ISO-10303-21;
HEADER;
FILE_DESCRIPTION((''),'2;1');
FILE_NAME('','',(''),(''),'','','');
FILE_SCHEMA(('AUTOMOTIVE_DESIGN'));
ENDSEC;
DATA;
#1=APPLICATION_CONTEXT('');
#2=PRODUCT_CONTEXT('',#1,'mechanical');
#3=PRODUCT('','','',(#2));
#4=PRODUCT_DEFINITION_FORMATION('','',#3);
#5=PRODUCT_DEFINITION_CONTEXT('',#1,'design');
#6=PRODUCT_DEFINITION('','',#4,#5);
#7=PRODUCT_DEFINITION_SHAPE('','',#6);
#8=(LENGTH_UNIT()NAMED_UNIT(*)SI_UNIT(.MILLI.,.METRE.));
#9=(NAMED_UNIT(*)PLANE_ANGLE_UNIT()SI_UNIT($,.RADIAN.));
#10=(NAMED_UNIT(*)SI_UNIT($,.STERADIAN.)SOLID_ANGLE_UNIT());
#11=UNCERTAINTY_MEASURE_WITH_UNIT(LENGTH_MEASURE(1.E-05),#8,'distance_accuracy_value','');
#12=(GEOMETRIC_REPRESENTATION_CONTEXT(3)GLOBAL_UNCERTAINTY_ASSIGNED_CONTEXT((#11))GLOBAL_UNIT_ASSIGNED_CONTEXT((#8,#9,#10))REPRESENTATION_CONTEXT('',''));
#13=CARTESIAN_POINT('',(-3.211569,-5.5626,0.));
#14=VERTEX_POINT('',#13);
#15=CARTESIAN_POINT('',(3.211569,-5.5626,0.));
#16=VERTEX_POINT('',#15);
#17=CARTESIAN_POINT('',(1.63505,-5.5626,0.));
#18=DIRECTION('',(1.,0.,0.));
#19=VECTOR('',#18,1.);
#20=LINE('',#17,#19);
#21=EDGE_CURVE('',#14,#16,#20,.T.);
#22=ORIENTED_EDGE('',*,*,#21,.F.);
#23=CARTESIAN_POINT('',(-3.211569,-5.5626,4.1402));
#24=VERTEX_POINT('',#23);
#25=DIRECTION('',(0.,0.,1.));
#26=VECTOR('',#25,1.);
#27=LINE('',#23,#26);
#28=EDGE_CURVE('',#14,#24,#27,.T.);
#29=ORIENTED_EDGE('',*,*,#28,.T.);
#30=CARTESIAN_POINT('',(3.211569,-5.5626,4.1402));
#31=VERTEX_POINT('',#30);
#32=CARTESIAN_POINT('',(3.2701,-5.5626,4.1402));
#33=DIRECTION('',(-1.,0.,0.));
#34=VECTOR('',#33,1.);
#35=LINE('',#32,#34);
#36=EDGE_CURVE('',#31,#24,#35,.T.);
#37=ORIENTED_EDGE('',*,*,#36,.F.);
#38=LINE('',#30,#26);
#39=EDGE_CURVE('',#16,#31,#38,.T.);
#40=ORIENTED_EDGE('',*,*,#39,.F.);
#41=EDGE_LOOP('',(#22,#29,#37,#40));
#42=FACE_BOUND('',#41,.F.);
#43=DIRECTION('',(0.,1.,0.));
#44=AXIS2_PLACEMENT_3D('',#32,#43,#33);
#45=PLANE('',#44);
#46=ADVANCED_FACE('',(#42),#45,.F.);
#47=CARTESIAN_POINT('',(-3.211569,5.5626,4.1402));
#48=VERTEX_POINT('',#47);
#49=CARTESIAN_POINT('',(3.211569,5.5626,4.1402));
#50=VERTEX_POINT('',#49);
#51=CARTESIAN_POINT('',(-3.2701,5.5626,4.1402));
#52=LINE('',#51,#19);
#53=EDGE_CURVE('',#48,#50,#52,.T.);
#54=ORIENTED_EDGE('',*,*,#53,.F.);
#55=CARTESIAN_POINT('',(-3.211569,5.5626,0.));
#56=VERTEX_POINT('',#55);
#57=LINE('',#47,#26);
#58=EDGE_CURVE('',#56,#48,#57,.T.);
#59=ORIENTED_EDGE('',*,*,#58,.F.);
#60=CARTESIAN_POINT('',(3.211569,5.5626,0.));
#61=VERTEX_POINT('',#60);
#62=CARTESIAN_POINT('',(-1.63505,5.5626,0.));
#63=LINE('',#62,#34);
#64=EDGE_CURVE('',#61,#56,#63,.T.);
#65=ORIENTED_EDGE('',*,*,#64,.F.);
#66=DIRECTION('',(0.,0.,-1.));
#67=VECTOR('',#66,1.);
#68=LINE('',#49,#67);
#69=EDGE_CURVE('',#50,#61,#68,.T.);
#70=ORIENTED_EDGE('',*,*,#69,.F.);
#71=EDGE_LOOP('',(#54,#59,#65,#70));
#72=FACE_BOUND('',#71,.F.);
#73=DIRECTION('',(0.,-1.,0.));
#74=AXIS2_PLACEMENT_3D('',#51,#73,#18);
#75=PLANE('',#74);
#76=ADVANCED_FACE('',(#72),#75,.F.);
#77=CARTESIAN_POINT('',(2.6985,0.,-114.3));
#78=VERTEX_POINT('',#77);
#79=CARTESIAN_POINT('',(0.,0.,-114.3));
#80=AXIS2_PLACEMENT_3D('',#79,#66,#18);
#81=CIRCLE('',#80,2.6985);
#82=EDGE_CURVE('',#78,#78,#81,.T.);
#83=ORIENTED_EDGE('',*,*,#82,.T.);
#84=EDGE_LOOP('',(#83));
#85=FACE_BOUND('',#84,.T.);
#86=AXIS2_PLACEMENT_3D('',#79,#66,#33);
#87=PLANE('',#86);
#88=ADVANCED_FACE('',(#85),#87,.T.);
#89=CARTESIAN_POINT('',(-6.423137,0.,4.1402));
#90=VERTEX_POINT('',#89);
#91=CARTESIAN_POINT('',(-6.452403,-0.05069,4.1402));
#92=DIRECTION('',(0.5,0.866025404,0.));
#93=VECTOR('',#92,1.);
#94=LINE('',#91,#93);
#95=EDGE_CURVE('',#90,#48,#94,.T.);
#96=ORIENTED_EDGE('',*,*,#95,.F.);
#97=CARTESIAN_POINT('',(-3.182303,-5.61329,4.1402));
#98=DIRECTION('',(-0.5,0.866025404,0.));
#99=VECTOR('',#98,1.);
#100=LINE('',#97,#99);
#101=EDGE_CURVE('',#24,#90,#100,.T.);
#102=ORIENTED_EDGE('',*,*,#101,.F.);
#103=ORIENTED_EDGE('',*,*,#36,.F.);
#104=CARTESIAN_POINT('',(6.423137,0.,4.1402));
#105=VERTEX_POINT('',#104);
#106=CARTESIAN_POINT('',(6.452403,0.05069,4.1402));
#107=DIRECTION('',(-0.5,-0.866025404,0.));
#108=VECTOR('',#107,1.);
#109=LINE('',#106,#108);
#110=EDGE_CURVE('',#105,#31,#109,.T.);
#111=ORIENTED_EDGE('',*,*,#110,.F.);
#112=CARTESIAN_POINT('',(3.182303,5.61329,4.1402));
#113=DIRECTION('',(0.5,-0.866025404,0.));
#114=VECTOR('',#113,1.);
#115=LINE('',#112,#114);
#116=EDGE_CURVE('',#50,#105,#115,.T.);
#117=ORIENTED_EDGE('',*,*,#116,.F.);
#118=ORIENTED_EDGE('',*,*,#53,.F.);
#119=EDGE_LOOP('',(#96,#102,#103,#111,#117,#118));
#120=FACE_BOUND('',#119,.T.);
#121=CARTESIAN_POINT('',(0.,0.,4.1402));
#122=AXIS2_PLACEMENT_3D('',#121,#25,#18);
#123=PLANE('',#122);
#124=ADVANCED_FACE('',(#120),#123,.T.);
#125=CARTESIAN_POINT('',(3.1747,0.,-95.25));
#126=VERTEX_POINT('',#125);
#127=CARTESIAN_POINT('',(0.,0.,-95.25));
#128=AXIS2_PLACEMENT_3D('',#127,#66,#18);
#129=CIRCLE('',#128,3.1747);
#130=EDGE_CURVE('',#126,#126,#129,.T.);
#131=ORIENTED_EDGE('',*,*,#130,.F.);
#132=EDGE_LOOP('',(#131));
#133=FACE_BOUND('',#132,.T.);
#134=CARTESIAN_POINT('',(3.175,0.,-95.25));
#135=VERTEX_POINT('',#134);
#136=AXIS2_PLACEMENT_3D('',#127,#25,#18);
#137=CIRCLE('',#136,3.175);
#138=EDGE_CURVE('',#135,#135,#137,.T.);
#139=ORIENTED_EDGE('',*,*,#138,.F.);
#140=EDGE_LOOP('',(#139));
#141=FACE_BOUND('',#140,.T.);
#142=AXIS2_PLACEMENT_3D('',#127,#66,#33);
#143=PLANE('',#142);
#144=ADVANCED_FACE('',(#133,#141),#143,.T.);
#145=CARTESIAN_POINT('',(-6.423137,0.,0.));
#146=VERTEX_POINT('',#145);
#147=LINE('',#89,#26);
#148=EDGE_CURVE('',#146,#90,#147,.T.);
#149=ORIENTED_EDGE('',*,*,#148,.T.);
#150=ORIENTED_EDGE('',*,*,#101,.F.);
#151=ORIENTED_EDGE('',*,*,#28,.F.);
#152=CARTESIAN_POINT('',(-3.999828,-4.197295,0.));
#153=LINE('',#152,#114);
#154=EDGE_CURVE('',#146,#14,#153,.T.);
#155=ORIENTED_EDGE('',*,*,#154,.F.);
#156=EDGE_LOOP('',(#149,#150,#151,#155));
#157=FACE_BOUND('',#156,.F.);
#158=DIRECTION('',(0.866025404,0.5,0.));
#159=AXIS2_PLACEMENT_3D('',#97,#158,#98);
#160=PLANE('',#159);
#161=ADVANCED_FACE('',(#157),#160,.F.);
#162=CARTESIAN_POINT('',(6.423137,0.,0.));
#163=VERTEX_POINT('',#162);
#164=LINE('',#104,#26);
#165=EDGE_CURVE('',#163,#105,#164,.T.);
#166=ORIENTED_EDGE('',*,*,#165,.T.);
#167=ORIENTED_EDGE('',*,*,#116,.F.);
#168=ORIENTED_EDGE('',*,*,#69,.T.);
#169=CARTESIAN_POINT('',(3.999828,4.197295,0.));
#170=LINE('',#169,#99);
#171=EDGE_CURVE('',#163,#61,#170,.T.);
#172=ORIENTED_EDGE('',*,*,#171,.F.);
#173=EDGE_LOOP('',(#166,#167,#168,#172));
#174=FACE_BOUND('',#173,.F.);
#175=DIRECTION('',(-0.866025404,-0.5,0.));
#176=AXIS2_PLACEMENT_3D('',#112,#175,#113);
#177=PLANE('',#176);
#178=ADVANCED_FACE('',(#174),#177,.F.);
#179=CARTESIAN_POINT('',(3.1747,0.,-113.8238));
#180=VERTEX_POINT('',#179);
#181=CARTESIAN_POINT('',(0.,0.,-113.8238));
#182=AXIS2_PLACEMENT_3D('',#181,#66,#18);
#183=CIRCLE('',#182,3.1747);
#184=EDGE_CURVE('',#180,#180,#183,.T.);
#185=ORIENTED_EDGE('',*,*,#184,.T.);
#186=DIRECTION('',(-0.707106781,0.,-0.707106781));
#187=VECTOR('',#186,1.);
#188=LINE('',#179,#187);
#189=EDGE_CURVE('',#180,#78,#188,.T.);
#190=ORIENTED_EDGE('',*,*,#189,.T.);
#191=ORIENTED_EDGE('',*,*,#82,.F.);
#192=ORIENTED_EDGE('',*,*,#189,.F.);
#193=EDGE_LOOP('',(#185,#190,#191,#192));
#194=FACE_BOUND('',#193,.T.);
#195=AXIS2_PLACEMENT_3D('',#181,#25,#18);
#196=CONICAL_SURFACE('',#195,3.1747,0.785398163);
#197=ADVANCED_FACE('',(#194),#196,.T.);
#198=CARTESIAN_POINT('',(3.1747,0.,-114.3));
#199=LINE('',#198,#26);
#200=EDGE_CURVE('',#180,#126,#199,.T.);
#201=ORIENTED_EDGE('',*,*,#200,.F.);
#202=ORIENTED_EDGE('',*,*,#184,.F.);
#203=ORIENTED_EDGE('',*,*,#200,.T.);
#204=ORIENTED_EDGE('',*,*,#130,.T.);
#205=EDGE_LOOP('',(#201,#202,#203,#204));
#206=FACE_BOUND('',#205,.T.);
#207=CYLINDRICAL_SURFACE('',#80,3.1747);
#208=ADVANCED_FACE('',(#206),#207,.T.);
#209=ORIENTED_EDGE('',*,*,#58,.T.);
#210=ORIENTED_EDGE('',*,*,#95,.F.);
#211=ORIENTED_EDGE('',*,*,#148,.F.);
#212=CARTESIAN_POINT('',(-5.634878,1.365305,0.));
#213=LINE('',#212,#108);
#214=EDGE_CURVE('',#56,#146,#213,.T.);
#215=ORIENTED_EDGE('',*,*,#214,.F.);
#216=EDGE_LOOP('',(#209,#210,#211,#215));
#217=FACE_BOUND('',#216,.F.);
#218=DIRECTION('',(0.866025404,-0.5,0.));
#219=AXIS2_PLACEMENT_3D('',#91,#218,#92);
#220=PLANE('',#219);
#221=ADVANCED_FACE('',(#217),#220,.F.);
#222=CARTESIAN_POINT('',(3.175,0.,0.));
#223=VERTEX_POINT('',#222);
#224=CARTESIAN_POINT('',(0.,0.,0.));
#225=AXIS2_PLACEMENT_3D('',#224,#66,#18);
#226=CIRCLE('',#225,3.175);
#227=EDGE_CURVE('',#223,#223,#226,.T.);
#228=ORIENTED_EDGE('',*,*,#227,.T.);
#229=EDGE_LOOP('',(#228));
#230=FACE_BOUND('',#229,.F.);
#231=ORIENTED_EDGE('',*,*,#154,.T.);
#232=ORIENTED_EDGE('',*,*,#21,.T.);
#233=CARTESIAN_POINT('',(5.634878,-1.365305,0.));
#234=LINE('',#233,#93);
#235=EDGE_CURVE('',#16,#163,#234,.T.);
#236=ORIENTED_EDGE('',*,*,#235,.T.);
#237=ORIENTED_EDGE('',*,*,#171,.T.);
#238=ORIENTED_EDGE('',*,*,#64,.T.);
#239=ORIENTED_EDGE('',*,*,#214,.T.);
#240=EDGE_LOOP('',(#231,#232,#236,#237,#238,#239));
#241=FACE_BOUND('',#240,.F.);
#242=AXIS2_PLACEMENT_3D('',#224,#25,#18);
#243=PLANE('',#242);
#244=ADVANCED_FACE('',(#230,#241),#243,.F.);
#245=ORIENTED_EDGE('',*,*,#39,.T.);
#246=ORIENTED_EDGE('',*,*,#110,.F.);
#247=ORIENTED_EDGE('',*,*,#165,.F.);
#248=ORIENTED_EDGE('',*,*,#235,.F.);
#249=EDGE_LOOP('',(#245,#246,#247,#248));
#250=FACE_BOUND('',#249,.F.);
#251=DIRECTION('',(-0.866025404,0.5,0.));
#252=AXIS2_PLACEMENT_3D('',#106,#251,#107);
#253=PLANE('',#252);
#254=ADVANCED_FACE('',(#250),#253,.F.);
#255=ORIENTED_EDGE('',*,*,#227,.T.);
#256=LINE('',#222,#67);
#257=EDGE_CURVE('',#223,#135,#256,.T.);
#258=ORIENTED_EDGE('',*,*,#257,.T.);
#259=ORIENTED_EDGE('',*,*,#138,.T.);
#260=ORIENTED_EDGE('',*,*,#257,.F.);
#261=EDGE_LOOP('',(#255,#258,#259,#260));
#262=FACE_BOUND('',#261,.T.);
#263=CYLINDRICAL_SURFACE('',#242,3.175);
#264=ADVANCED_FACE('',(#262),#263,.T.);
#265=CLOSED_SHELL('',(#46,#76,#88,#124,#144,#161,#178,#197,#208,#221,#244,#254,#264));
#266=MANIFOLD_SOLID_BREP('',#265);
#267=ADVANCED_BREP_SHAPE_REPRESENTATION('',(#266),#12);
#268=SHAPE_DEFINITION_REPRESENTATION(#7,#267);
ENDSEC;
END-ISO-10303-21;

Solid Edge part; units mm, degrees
sketch "Sketch1" plane through (0, 0, 0) normal (0, 0, 1) x (1, 0, 0)
  circle A0 centre (0, 0) radius 6.4526
  dimension "D1" = 12.9052
extrude "Protrusion1" add sketch "Sketch1" along normal blind 4.1402
sketch "Sketch2" plane through (0, 0, 0) normal (0, 0, -1) x (1, 0, 0)
  circle A0 centre (0, 0) radius 3.175
extrude "Protrusion2" add sketch "Sketch2" along normal blind 114.3
sketch "Sketch3" plane through (0, 0, -114.3) normal (0, 0, -1) x (1, 0, 0)
  circle A0 centre (0, 0) radius 3.1747
extrude "Cutout1" cut sketch "Sketch3" against normal blind 19.05 flip side to cut
chamfer "Chamfer_1" distance 0.4762 angle 45 1 edges at (-3.1747, 0, -114.3)
sketch "Sketch4" plane through (0, 0, 4.1402) normal (0, 0, 1) x (1, 0, 0)
  line L0 (-3.2701, 5.5626) -> (3.2701, 5.5626)
  dimension "D1" = 11.1252
extrude "Cutout2" cut sketch "Sketch4" against normal up to next material side at (0, 5.6126, 4.1402)
pattern_circular "Pattern1" count 6 over 360 about axis through (0, 0, 4.1402) along (0, 0, 1) of "Cutout2"
properties part number "24109073"
